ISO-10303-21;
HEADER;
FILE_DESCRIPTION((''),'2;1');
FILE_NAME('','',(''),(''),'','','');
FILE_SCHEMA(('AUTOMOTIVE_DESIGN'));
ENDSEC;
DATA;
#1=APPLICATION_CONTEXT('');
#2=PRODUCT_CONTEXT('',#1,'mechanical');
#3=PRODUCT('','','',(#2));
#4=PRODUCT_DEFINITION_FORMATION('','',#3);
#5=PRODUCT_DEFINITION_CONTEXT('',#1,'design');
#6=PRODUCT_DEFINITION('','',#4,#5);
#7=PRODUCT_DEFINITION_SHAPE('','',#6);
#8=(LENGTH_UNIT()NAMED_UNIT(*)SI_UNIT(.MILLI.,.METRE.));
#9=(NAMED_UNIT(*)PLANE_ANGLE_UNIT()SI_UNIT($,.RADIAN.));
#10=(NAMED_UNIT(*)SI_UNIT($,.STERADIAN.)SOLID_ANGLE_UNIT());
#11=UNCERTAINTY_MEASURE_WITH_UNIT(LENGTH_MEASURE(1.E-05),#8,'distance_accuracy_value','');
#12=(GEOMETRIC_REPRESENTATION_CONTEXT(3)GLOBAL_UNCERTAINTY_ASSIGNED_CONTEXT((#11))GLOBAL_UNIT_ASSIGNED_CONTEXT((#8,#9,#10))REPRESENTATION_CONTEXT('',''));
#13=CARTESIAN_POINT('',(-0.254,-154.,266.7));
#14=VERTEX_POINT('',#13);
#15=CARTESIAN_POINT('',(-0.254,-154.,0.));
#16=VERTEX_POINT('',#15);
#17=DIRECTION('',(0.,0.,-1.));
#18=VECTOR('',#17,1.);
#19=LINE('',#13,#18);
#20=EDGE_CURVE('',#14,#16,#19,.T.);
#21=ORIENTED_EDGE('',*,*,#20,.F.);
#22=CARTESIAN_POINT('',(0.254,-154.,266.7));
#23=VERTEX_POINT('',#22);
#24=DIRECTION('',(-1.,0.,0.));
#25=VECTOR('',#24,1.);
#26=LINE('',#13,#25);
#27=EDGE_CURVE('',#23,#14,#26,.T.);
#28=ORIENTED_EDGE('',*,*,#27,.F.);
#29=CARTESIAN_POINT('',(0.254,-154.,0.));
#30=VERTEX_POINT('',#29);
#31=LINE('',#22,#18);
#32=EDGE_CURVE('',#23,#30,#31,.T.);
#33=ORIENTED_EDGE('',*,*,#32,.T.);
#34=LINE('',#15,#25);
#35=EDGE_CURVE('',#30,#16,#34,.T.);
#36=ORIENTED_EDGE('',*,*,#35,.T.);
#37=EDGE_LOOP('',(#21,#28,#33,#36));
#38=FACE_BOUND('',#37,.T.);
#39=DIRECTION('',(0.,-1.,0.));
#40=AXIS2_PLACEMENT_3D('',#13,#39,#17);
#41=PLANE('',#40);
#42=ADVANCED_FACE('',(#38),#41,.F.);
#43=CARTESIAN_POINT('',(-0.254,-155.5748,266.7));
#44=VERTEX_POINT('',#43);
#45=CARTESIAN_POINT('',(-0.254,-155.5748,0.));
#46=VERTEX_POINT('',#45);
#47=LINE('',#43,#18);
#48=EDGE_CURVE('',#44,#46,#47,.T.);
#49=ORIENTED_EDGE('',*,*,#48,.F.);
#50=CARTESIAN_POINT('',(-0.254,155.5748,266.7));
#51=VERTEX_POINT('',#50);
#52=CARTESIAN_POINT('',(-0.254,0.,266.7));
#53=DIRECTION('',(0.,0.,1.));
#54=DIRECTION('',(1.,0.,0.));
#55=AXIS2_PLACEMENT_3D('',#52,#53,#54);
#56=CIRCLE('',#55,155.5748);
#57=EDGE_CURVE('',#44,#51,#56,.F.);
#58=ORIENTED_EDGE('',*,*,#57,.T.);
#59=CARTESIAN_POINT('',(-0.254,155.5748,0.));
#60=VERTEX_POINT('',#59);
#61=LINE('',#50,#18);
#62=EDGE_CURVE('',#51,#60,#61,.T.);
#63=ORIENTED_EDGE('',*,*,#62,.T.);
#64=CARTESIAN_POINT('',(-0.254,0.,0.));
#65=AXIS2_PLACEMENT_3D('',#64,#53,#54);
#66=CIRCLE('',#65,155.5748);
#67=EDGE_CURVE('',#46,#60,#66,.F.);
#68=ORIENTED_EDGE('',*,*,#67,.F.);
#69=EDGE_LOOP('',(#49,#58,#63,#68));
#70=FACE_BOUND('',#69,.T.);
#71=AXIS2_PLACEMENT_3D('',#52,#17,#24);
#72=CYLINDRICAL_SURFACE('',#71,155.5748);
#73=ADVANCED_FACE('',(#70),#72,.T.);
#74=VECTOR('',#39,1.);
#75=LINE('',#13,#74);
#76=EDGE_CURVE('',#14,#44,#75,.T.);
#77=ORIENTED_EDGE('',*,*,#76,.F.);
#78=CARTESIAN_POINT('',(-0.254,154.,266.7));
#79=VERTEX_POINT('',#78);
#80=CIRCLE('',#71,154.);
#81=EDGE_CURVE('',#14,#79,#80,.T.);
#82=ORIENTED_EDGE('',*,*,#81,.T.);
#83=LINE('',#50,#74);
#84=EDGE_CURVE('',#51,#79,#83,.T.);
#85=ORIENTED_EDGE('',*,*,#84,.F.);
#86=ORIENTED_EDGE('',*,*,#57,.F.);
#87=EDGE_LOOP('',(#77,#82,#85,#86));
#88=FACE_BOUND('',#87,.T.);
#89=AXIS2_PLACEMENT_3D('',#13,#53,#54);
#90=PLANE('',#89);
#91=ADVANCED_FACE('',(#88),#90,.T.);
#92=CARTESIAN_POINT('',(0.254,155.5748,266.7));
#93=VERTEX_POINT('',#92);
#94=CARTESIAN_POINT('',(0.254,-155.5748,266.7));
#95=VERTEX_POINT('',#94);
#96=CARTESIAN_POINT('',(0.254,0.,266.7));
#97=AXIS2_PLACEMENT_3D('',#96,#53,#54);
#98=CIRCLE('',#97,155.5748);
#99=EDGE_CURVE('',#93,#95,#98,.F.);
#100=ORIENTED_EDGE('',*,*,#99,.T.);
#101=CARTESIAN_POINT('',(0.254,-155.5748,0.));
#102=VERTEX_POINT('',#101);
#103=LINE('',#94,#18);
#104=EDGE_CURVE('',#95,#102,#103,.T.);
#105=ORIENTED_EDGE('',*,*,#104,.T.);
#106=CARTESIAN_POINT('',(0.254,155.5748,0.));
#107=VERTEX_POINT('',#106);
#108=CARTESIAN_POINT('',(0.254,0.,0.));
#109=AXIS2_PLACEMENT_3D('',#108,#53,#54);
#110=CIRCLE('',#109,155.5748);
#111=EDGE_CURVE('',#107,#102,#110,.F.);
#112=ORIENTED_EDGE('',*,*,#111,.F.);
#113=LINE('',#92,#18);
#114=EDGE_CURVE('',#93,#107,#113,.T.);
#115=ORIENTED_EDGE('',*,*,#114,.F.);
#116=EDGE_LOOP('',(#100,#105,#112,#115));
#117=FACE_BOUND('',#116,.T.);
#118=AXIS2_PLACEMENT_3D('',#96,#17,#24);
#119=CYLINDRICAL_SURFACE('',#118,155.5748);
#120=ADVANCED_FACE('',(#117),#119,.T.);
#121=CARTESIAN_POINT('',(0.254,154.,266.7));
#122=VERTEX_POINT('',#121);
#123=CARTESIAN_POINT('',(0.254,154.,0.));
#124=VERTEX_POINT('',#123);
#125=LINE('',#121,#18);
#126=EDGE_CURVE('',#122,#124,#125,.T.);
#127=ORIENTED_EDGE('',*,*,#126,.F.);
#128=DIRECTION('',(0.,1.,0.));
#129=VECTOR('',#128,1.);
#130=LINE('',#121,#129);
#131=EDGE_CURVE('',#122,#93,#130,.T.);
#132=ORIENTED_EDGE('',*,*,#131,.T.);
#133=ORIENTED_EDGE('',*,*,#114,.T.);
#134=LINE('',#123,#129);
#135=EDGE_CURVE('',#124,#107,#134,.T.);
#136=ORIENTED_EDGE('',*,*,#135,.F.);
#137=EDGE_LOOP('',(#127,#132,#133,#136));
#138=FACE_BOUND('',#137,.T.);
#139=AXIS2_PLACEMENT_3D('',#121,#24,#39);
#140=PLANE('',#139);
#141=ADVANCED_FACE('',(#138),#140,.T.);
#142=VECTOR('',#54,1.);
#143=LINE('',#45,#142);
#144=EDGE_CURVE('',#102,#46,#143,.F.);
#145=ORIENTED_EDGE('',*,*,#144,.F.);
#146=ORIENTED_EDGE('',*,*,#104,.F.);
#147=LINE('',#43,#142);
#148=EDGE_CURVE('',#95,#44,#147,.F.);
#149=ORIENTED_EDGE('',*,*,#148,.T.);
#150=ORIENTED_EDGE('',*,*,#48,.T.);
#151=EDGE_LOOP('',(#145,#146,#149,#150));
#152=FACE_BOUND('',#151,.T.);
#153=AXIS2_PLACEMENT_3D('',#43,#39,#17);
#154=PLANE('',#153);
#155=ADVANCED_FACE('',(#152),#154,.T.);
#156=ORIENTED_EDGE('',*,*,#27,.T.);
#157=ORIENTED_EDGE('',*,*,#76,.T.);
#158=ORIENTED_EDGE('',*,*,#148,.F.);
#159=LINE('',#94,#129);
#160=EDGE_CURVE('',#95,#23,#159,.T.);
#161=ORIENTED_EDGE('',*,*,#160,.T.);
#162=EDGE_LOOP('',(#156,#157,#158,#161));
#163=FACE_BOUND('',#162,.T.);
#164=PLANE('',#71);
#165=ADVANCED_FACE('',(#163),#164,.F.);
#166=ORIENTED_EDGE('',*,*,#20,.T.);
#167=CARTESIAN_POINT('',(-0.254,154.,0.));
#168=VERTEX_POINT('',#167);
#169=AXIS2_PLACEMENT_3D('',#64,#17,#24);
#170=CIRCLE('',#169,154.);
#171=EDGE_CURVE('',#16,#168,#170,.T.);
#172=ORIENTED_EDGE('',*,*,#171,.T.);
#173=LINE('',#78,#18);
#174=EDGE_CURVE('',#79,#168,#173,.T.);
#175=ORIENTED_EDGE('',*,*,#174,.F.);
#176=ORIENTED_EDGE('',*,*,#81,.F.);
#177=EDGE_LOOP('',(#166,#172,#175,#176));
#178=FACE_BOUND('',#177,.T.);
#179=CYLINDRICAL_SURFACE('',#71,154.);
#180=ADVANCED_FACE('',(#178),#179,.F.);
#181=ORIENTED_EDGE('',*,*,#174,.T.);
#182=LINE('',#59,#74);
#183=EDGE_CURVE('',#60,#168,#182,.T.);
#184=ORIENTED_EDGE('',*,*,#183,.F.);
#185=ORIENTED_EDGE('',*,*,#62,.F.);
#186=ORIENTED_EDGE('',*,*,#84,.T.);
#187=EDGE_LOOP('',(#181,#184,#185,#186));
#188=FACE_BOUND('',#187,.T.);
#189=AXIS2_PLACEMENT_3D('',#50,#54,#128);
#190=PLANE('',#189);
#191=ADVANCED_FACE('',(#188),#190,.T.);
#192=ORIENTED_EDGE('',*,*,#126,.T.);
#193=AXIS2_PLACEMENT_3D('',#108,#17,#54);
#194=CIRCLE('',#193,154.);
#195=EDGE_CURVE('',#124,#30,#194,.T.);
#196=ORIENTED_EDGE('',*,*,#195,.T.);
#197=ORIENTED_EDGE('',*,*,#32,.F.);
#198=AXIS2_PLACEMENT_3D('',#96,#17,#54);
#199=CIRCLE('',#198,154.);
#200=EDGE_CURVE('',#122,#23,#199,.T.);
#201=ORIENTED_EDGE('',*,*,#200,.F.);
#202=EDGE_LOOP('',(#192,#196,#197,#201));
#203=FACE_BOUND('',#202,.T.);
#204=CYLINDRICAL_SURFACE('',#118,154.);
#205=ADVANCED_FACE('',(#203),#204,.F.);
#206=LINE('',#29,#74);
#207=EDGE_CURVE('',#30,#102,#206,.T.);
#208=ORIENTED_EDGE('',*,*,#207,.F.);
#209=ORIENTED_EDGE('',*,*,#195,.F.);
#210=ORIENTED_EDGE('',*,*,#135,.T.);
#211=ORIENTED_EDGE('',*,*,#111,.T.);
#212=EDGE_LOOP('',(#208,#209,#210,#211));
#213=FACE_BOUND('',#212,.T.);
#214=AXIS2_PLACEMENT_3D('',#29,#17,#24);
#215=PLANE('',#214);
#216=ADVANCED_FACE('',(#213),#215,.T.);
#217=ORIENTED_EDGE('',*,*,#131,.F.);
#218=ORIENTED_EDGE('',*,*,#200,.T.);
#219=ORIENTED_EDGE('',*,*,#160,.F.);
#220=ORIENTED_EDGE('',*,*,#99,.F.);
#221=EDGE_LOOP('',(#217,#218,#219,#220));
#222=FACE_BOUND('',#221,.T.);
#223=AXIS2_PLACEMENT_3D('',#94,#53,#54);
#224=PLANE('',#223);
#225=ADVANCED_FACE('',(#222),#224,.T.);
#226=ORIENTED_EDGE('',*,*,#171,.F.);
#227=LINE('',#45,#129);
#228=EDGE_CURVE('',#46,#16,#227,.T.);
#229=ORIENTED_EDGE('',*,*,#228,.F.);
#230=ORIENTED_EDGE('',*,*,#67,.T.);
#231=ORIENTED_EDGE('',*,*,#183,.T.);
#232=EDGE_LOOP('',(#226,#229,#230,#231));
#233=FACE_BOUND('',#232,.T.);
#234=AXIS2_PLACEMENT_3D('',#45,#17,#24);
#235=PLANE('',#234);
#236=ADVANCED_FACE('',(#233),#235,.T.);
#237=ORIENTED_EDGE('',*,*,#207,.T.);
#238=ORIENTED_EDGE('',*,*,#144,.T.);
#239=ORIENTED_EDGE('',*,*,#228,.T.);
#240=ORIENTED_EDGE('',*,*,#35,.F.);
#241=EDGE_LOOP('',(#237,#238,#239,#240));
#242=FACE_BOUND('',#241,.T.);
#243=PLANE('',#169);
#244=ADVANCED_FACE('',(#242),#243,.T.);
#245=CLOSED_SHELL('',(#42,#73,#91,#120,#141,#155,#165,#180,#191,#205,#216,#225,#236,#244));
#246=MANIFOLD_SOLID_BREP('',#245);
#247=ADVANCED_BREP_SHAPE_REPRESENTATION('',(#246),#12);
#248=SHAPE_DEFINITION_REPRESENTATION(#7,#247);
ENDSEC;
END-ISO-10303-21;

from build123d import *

# Parameters (mm, degrees)
BASE_FLANGE1_DEPTH = 266.7


# Sheet-metal steps are written as plain solids
with BuildPart() as part:
    # Sketch1 → Base-Flange1 (new body)
    with BuildSketch(Plane.XY):
        with BuildLine():
            ThreePointArc((-0.254, 154), (-154.254, 0), (-0.254, -154))
            Line((-0.254, -154), (0.254, -154))
            ThreePointArc((0.254, -154), (154.254, 0), (0.254, 154))
            Line((0.254, 154), (0.254, 155.5748))
            ThreePointArc((0.254, 155.5748), (155.8288, 0), (0.254, -155.5748))
            Line((0.254, -155.5748), (-0.254, -155.5748))
            ThreePointArc((-0.254, -155.5748), (-155.8288, 0), (-0.254, 155.5748))
            Line((-0.254, 155.5748), (-0.254, 154))
        make_face()
    extrude(amount=BASE_FLANGE1_DEPTH)


solid = part.part
